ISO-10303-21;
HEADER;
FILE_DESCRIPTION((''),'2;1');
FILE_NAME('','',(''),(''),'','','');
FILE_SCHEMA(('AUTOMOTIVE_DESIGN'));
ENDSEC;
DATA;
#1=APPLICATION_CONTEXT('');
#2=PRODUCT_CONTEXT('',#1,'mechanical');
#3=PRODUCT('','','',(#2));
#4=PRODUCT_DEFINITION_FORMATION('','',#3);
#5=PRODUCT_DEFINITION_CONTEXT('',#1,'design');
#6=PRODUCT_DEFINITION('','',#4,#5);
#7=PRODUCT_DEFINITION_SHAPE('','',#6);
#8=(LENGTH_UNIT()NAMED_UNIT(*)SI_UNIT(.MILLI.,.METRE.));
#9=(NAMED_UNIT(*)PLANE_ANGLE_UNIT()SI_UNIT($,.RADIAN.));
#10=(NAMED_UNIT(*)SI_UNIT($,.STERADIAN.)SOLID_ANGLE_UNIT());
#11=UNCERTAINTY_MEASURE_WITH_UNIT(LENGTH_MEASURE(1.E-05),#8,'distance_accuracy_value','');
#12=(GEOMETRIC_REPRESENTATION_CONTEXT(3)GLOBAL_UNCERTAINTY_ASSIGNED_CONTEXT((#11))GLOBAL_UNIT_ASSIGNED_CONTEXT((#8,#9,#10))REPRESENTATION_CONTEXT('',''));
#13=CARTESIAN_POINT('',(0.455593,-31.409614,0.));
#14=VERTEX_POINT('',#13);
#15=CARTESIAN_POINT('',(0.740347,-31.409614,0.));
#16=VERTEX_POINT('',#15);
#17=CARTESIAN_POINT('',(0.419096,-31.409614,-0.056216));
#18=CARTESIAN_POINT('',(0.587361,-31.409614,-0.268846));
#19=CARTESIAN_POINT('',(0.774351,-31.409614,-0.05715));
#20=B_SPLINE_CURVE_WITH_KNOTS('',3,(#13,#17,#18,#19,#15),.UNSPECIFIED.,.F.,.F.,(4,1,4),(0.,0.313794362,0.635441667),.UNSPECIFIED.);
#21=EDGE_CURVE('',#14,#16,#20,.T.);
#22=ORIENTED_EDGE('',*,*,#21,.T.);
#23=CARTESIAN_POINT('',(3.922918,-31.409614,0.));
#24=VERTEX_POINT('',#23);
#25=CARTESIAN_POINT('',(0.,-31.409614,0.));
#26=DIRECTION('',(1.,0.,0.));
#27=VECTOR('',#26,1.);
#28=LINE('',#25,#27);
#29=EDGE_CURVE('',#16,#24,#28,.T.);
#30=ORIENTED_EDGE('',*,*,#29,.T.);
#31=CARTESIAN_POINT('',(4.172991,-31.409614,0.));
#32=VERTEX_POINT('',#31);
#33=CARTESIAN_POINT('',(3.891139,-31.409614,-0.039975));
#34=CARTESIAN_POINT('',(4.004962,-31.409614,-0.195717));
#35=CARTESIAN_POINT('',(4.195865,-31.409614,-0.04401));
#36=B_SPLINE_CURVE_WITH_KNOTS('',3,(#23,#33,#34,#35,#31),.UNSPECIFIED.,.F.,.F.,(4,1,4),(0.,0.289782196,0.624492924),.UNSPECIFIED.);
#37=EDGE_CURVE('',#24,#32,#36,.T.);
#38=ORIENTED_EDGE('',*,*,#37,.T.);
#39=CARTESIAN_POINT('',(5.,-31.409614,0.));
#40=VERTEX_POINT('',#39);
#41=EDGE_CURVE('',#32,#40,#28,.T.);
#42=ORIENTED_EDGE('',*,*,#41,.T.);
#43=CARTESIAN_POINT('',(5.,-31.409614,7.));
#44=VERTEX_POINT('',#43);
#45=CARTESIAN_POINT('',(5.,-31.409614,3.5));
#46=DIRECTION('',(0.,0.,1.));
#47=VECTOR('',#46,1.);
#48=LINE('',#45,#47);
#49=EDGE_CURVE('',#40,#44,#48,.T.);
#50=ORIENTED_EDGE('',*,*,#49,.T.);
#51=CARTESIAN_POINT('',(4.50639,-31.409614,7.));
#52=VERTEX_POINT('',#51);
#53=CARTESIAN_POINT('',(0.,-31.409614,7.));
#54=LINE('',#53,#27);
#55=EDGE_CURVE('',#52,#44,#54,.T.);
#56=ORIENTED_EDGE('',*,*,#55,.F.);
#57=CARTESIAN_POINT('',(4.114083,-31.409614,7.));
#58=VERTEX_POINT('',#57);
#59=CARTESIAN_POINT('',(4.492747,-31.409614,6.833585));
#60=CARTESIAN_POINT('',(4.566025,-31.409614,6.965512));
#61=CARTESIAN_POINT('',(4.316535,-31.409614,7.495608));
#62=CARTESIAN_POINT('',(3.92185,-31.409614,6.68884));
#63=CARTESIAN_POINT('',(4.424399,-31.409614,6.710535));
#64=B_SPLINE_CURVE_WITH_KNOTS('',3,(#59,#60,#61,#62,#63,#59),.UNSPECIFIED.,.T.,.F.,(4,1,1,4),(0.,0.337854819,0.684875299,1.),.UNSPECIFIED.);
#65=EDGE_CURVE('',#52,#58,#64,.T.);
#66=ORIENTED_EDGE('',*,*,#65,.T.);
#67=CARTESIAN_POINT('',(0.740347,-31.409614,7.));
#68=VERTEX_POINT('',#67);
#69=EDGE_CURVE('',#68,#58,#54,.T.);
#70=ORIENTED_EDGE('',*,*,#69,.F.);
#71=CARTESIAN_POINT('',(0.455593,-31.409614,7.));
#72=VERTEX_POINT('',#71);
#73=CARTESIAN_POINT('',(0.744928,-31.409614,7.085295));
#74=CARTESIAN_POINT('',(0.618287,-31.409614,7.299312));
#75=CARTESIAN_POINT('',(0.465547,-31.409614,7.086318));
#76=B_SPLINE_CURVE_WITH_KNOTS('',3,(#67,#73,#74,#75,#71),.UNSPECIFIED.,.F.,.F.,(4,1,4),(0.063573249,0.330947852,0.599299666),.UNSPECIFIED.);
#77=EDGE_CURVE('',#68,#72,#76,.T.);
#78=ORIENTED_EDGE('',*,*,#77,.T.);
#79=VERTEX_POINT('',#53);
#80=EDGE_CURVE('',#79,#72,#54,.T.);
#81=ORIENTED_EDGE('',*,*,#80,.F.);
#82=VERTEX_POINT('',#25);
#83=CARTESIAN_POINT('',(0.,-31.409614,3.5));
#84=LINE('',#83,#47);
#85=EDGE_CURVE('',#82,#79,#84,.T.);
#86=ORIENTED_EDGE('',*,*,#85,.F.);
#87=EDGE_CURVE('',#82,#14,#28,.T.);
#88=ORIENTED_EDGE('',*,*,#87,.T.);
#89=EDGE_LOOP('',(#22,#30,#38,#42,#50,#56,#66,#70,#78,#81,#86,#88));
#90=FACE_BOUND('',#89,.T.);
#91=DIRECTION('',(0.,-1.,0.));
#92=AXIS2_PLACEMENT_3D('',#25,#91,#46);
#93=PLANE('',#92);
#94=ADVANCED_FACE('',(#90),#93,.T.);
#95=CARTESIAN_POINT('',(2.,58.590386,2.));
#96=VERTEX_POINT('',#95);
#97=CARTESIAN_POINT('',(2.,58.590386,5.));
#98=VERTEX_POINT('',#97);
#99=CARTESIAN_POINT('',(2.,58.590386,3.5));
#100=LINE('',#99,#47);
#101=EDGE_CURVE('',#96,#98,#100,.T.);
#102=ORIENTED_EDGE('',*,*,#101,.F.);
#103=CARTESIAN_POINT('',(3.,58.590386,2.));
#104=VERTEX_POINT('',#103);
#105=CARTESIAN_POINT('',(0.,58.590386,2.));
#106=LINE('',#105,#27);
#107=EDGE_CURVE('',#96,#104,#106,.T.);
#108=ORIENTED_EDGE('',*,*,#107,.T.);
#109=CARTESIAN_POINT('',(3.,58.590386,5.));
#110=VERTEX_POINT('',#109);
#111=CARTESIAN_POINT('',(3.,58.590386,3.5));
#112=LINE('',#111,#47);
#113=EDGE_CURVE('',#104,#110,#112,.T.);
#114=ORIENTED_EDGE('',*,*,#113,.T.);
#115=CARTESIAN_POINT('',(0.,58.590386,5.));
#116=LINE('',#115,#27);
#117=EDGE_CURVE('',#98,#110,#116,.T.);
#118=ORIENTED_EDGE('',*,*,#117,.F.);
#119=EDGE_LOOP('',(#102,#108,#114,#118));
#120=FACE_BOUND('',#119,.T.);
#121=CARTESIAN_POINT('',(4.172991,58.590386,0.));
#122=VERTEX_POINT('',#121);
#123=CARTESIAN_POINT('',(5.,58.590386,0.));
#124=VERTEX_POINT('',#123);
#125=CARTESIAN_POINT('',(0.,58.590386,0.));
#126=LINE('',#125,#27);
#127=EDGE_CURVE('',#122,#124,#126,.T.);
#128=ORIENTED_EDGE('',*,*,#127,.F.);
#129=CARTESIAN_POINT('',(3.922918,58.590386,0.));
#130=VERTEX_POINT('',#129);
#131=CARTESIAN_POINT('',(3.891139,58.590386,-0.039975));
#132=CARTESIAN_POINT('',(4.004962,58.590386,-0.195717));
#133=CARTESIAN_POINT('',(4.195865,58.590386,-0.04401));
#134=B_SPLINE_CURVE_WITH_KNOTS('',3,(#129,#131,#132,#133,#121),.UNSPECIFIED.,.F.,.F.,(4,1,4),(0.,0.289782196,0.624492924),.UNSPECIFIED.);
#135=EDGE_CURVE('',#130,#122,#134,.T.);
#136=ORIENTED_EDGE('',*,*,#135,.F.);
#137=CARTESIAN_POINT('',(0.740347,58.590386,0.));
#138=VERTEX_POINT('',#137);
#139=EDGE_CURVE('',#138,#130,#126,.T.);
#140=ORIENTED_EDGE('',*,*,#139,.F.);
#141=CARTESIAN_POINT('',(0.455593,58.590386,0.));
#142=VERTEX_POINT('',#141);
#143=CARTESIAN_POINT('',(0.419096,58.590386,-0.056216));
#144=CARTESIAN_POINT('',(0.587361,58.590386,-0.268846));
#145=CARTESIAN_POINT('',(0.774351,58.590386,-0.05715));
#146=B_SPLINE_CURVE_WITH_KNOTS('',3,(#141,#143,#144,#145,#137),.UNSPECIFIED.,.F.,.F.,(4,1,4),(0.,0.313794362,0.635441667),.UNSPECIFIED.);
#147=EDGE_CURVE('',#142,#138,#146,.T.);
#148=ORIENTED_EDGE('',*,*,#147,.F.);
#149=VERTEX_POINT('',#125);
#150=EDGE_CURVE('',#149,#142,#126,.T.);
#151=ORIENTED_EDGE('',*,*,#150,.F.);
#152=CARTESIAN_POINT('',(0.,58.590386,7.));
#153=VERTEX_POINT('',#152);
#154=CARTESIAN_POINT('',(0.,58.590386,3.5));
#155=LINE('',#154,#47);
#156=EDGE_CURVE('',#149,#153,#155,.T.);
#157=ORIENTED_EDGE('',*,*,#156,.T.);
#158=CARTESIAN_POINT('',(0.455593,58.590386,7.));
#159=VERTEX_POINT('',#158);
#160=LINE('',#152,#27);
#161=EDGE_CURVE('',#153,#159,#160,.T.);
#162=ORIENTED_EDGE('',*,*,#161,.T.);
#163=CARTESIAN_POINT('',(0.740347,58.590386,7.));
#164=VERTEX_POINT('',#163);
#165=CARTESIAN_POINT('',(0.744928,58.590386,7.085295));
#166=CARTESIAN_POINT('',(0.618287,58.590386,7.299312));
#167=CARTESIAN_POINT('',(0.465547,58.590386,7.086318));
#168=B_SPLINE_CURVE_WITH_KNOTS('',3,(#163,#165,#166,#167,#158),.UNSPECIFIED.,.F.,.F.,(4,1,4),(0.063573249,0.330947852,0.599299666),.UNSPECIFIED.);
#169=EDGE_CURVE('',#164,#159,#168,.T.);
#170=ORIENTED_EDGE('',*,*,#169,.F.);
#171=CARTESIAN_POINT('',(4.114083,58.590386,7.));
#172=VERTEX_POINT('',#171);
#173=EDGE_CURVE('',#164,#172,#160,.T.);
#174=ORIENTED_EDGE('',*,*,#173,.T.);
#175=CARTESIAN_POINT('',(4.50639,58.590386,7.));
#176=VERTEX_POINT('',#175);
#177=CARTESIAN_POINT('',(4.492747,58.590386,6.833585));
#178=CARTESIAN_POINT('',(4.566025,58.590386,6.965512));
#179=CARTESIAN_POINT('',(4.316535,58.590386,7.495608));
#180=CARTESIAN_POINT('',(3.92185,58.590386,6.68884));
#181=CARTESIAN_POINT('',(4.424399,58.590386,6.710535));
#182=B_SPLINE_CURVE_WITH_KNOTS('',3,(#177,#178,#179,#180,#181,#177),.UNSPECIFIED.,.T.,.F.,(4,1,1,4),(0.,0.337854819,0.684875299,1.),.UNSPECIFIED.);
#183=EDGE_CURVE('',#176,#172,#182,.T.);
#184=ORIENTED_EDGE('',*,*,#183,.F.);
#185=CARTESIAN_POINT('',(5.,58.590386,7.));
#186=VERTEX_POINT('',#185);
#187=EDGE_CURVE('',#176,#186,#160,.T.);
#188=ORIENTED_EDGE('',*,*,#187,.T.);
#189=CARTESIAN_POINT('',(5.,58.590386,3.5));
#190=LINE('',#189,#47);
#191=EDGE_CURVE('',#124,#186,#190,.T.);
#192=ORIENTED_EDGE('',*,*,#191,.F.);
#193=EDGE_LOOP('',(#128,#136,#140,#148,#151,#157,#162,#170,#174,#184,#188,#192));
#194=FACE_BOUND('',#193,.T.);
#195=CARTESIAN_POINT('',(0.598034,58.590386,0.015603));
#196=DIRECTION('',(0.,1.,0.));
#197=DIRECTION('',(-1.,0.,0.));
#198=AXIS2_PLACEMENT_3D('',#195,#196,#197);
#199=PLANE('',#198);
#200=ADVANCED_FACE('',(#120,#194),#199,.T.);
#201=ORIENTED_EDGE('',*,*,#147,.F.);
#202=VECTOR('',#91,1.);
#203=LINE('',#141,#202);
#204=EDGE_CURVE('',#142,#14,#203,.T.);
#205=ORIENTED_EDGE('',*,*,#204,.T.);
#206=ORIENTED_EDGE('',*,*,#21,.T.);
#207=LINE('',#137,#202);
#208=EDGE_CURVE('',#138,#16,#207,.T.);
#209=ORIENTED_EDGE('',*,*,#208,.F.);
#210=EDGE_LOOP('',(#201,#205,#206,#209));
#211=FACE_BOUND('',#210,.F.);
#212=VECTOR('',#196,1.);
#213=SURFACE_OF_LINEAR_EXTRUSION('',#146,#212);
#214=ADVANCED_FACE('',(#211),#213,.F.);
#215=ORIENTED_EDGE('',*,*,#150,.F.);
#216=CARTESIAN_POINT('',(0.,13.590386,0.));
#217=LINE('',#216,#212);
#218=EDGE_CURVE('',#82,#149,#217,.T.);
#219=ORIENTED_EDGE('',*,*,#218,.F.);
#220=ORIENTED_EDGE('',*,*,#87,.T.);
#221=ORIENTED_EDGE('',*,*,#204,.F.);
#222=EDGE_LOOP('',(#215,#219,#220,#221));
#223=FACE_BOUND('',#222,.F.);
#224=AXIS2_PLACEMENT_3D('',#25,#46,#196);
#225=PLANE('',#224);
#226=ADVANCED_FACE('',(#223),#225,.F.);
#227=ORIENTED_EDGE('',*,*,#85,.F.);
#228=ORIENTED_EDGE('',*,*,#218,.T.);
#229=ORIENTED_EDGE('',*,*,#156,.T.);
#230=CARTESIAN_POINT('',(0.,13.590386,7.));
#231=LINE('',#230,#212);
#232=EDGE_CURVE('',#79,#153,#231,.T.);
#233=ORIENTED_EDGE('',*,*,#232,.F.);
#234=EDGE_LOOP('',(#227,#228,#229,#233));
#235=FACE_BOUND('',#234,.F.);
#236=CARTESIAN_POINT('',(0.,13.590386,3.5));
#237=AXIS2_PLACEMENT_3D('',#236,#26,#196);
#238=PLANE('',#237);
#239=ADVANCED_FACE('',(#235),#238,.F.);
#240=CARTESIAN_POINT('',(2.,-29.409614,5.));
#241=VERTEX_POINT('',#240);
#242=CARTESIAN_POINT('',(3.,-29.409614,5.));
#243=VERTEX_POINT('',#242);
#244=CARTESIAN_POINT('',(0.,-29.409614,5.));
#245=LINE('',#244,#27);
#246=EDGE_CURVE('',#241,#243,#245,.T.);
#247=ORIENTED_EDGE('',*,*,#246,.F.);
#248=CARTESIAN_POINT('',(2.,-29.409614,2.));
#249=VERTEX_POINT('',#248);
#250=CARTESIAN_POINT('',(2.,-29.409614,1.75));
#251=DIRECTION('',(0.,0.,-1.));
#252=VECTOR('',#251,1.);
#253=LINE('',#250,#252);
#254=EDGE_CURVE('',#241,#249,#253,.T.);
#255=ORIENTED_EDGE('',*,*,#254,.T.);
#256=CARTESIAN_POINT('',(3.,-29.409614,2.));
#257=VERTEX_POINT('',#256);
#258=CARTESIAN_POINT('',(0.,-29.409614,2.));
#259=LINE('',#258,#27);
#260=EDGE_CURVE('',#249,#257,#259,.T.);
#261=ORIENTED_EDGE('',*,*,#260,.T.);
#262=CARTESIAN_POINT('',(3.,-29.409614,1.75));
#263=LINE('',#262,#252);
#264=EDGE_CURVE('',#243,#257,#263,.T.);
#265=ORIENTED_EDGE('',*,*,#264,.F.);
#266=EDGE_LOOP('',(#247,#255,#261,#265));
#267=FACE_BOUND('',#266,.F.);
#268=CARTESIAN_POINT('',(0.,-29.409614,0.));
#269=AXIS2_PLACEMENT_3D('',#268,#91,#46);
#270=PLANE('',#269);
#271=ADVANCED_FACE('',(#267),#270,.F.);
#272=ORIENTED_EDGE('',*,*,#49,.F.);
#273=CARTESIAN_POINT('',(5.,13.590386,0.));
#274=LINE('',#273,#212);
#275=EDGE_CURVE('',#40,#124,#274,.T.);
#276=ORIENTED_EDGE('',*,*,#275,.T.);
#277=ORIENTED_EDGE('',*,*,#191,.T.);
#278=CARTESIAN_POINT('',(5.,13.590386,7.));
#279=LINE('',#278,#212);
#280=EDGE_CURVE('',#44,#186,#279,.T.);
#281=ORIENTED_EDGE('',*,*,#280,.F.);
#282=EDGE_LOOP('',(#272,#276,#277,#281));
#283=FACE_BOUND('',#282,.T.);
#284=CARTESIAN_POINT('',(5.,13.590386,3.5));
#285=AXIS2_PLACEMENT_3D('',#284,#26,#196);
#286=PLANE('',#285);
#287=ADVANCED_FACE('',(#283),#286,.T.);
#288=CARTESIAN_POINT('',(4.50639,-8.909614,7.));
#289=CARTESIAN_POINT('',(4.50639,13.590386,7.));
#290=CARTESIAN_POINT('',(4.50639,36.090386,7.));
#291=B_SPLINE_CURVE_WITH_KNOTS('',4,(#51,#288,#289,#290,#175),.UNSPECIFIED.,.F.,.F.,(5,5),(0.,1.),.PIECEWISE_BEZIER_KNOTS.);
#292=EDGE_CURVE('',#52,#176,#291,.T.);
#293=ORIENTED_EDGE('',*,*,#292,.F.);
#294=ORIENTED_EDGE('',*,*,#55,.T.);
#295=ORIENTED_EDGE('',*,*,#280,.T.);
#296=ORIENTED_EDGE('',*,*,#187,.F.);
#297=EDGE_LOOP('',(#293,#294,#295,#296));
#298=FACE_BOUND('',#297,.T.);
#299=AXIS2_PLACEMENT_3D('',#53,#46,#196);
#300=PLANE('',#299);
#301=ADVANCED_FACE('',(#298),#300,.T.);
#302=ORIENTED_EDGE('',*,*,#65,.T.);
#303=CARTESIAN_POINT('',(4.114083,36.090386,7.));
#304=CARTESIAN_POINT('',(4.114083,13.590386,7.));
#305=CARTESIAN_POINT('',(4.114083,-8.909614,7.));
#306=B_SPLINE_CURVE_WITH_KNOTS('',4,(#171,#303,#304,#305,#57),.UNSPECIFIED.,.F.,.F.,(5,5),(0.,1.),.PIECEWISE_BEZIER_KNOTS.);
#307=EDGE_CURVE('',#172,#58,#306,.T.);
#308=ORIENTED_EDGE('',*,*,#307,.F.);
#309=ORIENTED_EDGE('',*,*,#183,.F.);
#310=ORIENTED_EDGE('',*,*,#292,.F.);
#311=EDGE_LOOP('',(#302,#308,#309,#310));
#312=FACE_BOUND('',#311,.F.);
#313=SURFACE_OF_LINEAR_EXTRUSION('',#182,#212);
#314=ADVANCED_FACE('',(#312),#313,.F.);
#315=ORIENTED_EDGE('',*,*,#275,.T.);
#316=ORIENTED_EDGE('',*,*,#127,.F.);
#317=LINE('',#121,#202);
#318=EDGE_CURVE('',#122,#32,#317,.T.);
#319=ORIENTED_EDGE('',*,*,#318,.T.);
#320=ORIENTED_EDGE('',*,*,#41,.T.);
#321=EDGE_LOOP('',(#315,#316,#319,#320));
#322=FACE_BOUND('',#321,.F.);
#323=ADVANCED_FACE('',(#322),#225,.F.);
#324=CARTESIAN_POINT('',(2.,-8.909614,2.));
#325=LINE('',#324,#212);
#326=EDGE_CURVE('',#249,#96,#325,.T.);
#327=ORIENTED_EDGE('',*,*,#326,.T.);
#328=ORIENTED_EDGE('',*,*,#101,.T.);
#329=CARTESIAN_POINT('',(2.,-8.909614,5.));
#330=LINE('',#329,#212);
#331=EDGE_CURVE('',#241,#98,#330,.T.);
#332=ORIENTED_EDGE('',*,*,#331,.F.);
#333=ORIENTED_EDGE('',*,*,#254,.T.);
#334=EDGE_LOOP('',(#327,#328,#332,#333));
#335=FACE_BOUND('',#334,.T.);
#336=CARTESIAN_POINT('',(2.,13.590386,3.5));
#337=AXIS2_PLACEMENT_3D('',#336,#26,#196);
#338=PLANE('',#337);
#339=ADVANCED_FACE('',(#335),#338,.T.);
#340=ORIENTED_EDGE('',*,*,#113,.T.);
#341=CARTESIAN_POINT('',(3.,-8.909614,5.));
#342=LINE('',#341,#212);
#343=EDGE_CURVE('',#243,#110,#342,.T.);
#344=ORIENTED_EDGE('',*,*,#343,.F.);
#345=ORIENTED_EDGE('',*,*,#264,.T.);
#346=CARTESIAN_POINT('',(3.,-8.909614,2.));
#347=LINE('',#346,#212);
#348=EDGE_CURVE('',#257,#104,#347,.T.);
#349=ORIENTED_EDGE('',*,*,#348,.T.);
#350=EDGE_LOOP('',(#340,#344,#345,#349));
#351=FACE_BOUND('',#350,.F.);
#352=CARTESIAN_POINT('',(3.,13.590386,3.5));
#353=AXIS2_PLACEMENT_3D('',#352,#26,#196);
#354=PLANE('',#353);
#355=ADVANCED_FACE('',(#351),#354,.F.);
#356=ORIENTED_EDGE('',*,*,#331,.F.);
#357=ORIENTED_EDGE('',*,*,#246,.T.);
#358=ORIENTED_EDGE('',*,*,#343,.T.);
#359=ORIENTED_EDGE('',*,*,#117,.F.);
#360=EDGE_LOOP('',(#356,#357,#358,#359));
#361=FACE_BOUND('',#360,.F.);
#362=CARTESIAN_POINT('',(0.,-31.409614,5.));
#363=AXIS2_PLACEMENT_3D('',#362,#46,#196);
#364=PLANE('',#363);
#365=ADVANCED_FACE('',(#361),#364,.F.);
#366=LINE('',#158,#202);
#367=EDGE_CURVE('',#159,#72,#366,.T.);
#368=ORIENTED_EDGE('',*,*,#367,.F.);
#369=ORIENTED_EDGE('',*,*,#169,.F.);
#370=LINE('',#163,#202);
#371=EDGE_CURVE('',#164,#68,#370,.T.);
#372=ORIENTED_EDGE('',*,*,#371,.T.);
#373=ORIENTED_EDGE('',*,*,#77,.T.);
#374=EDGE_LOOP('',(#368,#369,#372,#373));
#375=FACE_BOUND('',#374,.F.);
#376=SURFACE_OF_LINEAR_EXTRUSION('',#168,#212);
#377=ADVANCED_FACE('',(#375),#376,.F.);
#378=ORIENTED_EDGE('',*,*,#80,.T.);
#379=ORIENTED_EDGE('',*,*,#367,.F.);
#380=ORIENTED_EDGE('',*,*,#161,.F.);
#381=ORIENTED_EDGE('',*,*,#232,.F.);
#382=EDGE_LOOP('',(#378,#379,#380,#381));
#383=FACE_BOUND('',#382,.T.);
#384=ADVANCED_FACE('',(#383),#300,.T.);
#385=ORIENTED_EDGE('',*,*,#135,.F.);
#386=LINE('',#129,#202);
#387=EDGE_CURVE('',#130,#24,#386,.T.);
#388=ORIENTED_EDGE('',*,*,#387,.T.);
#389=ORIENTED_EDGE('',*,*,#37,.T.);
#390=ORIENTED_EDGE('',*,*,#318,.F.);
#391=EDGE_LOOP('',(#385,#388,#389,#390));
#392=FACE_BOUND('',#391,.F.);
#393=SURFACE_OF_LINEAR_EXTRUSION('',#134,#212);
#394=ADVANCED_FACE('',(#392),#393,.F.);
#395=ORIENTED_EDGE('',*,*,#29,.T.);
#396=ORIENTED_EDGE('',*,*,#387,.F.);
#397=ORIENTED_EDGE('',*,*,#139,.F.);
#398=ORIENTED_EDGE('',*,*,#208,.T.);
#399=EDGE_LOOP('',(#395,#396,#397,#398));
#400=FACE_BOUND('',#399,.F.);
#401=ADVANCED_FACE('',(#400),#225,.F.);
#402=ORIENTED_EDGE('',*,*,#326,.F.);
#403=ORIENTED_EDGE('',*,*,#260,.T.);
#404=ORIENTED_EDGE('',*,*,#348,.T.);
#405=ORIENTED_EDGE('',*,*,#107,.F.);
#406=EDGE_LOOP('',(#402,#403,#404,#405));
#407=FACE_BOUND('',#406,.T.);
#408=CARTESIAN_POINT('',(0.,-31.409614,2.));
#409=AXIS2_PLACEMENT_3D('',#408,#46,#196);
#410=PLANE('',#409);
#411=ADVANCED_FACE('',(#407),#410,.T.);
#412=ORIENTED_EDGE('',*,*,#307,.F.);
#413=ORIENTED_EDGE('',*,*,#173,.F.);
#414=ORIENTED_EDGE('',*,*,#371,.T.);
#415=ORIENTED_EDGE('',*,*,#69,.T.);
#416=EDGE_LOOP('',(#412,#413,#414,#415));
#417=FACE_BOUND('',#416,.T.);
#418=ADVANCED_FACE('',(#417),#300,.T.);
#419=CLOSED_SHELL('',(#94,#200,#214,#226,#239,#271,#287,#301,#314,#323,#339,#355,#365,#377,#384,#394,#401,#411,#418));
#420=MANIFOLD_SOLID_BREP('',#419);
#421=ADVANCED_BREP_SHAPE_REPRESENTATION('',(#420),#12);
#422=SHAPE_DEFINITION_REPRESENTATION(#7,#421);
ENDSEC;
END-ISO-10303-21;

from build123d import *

# Parameters (mm, degrees)
F0_W     = 90
F0_H     = 7
F1_DEPTH = 5
F2_T     = -2
F4_DEPTH = 90
F6_DEPTH = 90
F9_DEPTH = 90


with BuildPart() as f1:
    # F0 (on Right) → F1 (new body)
    with BuildSketch(Plane.YZ):
        with Locations((13.5903862119, 3.5)):
            Rectangle(F0_W, F0_H)
    extrude(amount=F1_DEPTH)

    # F2
    f2_openings = [f1.faces().sort_by_distance(p)[0] for p in [
        (2.5, 58.590386, 3.5),
    ]]
    offset(amount=F2_T, openings=f2_openings)

    # F3 (on face) → F4 (join)
    with BuildSketch(Plane(origin=(0, 58.5903862119, 0), x_dir=(-1, 0, 0), z_dir=(0, 1, 0))):
        with BuildLine():
            add(Edge.make_bspline(
                [(-4.4927471317, 6.8335854448), (-4.5660253813, 6.9655119185), (-4.3165354389, 7.4956076145), (-3.9218503585, 6.688839741), (-4.4243988792, 6.7105346898), (-4.4927471317, 6.8335854448)],
                knots=[0, 0, 0, 0, 0.3378548186, 0.6848752994, 1, 1, 1, 1], degree=3))
        make_face()
    extrude(amount=-F4_DEPTH)

    # F5 (on face) → F6 (join)
    with BuildSketch(Plane(origin=(0, 58.5903862119, 0), x_dir=(-1, 0, 0), z_dir=(0, 1, 0))):
        with BuildLine():
            add(Edge.make_bspline(
                [(-0.7403470987, 7), (-0.744928401, 7.0852952576), (-0.61828683, 7.299312345), (-0.4655472616, 7.0863177766), (-0.4555928001, 7)],
                knots=[0.063573249, 0.063573249, 0.063573249, 0.063573249, 0.330947852, 0.5992996658, 0.5992996658, 0.5992996658, 0.5992996658], degree=3))
            Line((-0.7403470987, 7), (-0.4555928001, 7))
        make_face()
    extrude(amount=-F6_DEPTH)

    # F7 (on face) + F8 (on face) → F9 (join)
    with BuildSketch(Plane(origin=(0, 58.5903862119, 0), x_dir=(-1, 0, 0), z_dir=(0, 1, 0))):
        with BuildLine():
            Line((-0.7403470979, 0), (-0.4555928001, 0))
            add(Edge.make_bspline(
                [(-0.7403470979, 0), (-0.7018064847, 0.0647744469), (-0.4979936325, 0.0653103199), (-0.4555928001, 0)],
                knots=[0.6354416672, 0.6354416672, 0.6354416672, 0.6354416672, 1, 1, 1, 1], degree=3))
        make_face()
        with BuildLine():
            add(Edge.make_bspline(
                [(-0.4555928001, 0), (-0.4190961932, -0.0562159972), (-0.587360905, -0.2688458523), (-0.7743512153, -0.0571500481), (-0.7403470979, 0)],
                knots=[0, 0, 0, 0, 0.3137943625, 0.6354416672, 0.6354416672, 0.6354416672, 0.6354416672], degree=3))
            Line((-0.4555928001, 0), (-0.7403470979, 0))
        make_face()
    with BuildSketch(Plane(origin=(0, 58.5903862119, 0), x_dir=(-1, 0, 0), z_dir=(0, 1, 0))):
        with BuildLine():
            add(Edge.make_bspline(
                [(-3.9229183458, 0), (-3.8911392187, -0.0399748921), (-4.0049623328, -0.195717275), (-4.1958645114, -0.0440099941), (-4.1729910299, 0)],
                knots=[0, 0, 0, 0, 0.2897821962, 0.6244929237, 0.6244929237, 0.6244929237, 0.6244929237], degree=3))
            Line((-3.9229183458, 0), (-4.1729910299, 0))
        make_face()
    extrude(amount=-F9_DEPTH)


solid = f1.part
